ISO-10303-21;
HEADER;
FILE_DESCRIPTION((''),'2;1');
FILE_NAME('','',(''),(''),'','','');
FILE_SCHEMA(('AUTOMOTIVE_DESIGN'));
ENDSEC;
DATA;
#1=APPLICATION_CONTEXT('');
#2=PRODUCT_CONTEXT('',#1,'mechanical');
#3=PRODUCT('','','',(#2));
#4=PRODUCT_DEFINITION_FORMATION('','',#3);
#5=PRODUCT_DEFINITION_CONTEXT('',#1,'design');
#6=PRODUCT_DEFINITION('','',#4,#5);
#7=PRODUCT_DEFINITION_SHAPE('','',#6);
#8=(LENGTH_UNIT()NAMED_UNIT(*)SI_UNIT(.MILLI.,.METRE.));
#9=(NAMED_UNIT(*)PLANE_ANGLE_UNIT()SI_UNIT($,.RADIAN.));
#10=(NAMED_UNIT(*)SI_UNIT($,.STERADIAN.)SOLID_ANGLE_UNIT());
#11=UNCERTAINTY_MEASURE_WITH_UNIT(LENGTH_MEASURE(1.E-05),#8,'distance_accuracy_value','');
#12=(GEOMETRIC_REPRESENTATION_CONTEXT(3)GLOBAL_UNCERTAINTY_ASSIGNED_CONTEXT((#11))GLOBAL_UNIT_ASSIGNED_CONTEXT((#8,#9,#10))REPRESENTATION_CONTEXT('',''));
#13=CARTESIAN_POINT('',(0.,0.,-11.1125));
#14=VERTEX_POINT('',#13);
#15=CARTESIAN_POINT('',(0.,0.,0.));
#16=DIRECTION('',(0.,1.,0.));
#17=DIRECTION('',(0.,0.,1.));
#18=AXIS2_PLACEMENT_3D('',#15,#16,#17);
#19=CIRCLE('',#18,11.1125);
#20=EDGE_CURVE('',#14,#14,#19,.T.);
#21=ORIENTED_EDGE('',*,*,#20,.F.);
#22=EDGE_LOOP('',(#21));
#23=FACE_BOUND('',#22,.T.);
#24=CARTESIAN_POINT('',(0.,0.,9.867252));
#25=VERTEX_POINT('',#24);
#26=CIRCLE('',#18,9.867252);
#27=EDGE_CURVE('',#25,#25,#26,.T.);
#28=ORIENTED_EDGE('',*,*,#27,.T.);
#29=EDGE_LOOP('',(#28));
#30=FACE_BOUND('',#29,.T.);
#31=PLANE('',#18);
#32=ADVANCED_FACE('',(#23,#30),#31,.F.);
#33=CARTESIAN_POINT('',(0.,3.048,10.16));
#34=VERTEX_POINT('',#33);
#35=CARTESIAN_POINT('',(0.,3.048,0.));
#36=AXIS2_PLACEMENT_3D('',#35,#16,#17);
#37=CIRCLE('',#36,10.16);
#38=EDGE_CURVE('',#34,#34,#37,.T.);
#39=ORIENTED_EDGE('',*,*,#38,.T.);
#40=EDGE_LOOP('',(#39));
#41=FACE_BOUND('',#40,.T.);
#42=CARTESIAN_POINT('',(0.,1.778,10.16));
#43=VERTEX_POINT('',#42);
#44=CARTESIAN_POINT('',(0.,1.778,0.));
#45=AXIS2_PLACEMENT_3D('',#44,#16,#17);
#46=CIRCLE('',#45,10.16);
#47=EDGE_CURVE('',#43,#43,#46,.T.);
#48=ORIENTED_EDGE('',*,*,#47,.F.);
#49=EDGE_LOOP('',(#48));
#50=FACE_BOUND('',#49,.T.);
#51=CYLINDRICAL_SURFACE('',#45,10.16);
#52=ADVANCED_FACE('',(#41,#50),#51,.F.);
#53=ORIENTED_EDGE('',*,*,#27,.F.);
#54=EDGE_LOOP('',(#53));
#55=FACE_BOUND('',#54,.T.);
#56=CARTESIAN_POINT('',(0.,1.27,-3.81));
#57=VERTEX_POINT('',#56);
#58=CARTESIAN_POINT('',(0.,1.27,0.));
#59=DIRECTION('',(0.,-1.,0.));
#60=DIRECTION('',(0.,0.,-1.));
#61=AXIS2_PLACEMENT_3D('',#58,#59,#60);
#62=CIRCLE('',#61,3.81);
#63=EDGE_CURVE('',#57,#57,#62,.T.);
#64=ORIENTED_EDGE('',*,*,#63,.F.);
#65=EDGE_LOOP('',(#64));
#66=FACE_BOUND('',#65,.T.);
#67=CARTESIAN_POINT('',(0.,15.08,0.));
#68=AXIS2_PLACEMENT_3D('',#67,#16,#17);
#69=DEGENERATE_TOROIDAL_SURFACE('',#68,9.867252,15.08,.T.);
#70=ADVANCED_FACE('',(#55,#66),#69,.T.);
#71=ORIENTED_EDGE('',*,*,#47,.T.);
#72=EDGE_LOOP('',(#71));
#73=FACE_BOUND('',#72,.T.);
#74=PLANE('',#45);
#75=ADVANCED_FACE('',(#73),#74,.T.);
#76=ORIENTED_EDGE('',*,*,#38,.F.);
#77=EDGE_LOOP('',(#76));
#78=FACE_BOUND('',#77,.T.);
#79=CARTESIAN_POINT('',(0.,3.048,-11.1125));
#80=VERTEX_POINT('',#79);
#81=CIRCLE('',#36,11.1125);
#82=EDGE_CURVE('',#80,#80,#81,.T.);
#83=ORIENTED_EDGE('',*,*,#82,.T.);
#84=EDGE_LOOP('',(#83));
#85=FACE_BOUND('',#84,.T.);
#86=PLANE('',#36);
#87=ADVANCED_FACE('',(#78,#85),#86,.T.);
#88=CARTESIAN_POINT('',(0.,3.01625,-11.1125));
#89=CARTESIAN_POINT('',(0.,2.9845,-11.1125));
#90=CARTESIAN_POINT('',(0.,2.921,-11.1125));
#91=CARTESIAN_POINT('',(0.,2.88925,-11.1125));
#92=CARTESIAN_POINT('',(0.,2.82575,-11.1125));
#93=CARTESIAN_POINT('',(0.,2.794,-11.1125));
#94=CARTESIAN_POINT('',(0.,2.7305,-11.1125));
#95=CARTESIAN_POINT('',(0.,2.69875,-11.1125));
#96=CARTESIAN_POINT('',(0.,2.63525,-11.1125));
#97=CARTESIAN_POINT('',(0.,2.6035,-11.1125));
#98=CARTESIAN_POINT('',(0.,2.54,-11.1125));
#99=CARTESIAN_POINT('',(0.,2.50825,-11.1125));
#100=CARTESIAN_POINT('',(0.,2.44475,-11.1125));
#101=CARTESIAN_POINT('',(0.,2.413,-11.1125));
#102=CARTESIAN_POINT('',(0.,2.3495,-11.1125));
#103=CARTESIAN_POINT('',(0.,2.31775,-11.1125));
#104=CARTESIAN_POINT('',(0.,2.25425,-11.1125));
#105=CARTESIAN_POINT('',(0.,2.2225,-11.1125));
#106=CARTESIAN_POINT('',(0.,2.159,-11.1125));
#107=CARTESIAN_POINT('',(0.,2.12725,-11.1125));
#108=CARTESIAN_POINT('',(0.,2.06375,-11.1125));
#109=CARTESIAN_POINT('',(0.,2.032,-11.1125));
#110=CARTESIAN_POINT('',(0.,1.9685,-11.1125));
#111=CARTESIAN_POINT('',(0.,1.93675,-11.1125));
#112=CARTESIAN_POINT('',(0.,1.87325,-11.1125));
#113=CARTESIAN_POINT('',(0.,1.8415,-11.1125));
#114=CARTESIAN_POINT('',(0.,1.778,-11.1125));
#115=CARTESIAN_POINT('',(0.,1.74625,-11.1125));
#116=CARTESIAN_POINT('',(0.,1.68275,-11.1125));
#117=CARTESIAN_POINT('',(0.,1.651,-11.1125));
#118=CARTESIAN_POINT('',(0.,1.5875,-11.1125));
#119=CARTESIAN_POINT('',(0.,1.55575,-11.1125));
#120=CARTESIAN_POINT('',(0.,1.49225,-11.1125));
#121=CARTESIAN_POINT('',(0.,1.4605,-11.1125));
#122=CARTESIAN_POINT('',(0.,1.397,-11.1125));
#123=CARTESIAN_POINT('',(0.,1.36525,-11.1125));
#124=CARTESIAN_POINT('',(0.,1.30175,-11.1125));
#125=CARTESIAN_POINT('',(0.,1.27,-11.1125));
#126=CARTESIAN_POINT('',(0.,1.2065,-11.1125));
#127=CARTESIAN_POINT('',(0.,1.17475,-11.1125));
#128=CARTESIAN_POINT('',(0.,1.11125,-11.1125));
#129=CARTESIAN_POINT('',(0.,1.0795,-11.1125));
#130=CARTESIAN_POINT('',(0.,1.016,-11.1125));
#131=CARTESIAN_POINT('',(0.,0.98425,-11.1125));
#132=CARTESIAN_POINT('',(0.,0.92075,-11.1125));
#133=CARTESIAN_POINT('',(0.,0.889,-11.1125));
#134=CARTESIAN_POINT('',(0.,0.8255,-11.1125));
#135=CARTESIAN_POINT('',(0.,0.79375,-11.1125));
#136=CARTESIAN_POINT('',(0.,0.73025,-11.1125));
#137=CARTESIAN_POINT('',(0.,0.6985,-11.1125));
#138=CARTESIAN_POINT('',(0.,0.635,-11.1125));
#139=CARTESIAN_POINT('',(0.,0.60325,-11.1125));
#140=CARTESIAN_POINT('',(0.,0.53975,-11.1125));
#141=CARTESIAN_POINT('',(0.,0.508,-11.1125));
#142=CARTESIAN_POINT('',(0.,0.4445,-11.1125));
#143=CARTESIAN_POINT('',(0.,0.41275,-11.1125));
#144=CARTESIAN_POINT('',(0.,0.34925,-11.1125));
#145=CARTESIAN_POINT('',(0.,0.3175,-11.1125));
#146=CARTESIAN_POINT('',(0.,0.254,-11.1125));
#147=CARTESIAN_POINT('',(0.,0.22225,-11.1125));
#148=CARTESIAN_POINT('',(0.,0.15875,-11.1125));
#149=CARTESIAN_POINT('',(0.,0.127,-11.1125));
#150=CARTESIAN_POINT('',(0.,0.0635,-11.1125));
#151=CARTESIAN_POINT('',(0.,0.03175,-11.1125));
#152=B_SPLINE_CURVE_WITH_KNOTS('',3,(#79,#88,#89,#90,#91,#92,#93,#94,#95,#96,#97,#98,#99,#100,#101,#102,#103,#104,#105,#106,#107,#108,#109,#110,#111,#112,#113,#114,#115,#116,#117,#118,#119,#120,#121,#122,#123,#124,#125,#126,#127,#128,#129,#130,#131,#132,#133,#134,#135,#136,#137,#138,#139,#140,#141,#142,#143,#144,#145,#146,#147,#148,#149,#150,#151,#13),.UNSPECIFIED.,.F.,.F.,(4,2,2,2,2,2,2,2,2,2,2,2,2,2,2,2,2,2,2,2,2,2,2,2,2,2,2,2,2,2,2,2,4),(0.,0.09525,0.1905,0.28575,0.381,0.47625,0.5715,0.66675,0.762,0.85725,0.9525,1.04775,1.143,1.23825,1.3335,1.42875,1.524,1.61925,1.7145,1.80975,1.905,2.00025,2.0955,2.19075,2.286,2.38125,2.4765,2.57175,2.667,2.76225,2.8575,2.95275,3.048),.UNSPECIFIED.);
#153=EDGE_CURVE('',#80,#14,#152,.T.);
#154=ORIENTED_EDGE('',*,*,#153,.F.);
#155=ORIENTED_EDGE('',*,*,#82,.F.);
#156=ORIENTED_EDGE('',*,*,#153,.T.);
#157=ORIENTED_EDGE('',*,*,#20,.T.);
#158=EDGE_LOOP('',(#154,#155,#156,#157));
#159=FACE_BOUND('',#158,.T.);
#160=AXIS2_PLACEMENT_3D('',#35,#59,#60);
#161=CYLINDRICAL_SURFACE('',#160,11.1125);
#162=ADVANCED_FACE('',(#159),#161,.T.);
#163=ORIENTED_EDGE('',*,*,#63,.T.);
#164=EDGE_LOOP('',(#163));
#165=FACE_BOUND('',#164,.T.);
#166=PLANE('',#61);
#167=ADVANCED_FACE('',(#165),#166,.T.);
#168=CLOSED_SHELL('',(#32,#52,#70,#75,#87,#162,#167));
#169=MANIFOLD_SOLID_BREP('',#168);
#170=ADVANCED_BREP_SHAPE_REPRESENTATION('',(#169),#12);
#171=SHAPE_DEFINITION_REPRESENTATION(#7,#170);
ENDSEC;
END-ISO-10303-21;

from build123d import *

# Parameters (mm, degrees)
SKETCH2_R           = 11.1125
BOSS_EXTRUDE1_DEPTH = 3.048
SKETCH3_R           = 10.16
CUT_EXTRUDE1_DEPTH  = 1.27
SKETCH4_R           = 3.81
CUT_EXTRUDE2_DEPTH  = 1.27
FILLET1_R           = 15.08


with BuildPart() as part:
    # Sketch2 → Boss-Extrude1 (new body)
    with BuildSketch(Plane(origin=(0, 0, 0), x_dir=(1, 0, 0), z_dir=(0, 1, 0))):
        with Locations(Location((0, 0, 0), (0, 0, 90))):
            Circle(SKETCH2_R)
    extrude(amount=BOSS_EXTRUDE1_DEPTH)

    # Sketch3 → Cut-Extrude1 (cut)
    with BuildSketch(Plane(origin=(0, 3.048, 0), x_dir=(1, 0, 0), z_dir=(0, 1, 0))):
        with Locations(Location((0, 0, 0), (0, 0, 270))):
            Circle(SKETCH3_R)
    extrude(amount=-CUT_EXTRUDE1_DEPTH, mode=Mode.SUBTRACT)

    # Sketch4 → Cut-Extrude2 (cut)
    with BuildSketch(Plane(origin=(0, 0, 0), x_dir=(-1, 0, 0), z_dir=(0, -1, 0))):
        with Locations(Location((0, 0, 0), (0, 0, 90))):
            Circle(SKETCH4_R)
    extrude(amount=-CUT_EXTRUDE2_DEPTH, mode=Mode.SUBTRACT)

    # Fillet1
    # the kernel refuses this fillet: 15.08 mm, written as the material it takes off along each edge
    with BuildSketch(Plane(origin=(0, 0, 0), x_dir=(0, 0, -1), z_dir=(-1, 0, 0))) as fillet1_piece_1:
        with BuildLine():
            CenterArc((9.867251852, -15.08), FILLET1_R, 90, 23.682902999)
            Line((3.81, -1.27), (3.81, 0))
            Line((3.81, 0), (9.867251852, 0))
        make_face()
    revolve(axis=Axis((0, 0, 0), (0, -1, 0)), mode=Mode.SUBTRACT)


solid = part.part
